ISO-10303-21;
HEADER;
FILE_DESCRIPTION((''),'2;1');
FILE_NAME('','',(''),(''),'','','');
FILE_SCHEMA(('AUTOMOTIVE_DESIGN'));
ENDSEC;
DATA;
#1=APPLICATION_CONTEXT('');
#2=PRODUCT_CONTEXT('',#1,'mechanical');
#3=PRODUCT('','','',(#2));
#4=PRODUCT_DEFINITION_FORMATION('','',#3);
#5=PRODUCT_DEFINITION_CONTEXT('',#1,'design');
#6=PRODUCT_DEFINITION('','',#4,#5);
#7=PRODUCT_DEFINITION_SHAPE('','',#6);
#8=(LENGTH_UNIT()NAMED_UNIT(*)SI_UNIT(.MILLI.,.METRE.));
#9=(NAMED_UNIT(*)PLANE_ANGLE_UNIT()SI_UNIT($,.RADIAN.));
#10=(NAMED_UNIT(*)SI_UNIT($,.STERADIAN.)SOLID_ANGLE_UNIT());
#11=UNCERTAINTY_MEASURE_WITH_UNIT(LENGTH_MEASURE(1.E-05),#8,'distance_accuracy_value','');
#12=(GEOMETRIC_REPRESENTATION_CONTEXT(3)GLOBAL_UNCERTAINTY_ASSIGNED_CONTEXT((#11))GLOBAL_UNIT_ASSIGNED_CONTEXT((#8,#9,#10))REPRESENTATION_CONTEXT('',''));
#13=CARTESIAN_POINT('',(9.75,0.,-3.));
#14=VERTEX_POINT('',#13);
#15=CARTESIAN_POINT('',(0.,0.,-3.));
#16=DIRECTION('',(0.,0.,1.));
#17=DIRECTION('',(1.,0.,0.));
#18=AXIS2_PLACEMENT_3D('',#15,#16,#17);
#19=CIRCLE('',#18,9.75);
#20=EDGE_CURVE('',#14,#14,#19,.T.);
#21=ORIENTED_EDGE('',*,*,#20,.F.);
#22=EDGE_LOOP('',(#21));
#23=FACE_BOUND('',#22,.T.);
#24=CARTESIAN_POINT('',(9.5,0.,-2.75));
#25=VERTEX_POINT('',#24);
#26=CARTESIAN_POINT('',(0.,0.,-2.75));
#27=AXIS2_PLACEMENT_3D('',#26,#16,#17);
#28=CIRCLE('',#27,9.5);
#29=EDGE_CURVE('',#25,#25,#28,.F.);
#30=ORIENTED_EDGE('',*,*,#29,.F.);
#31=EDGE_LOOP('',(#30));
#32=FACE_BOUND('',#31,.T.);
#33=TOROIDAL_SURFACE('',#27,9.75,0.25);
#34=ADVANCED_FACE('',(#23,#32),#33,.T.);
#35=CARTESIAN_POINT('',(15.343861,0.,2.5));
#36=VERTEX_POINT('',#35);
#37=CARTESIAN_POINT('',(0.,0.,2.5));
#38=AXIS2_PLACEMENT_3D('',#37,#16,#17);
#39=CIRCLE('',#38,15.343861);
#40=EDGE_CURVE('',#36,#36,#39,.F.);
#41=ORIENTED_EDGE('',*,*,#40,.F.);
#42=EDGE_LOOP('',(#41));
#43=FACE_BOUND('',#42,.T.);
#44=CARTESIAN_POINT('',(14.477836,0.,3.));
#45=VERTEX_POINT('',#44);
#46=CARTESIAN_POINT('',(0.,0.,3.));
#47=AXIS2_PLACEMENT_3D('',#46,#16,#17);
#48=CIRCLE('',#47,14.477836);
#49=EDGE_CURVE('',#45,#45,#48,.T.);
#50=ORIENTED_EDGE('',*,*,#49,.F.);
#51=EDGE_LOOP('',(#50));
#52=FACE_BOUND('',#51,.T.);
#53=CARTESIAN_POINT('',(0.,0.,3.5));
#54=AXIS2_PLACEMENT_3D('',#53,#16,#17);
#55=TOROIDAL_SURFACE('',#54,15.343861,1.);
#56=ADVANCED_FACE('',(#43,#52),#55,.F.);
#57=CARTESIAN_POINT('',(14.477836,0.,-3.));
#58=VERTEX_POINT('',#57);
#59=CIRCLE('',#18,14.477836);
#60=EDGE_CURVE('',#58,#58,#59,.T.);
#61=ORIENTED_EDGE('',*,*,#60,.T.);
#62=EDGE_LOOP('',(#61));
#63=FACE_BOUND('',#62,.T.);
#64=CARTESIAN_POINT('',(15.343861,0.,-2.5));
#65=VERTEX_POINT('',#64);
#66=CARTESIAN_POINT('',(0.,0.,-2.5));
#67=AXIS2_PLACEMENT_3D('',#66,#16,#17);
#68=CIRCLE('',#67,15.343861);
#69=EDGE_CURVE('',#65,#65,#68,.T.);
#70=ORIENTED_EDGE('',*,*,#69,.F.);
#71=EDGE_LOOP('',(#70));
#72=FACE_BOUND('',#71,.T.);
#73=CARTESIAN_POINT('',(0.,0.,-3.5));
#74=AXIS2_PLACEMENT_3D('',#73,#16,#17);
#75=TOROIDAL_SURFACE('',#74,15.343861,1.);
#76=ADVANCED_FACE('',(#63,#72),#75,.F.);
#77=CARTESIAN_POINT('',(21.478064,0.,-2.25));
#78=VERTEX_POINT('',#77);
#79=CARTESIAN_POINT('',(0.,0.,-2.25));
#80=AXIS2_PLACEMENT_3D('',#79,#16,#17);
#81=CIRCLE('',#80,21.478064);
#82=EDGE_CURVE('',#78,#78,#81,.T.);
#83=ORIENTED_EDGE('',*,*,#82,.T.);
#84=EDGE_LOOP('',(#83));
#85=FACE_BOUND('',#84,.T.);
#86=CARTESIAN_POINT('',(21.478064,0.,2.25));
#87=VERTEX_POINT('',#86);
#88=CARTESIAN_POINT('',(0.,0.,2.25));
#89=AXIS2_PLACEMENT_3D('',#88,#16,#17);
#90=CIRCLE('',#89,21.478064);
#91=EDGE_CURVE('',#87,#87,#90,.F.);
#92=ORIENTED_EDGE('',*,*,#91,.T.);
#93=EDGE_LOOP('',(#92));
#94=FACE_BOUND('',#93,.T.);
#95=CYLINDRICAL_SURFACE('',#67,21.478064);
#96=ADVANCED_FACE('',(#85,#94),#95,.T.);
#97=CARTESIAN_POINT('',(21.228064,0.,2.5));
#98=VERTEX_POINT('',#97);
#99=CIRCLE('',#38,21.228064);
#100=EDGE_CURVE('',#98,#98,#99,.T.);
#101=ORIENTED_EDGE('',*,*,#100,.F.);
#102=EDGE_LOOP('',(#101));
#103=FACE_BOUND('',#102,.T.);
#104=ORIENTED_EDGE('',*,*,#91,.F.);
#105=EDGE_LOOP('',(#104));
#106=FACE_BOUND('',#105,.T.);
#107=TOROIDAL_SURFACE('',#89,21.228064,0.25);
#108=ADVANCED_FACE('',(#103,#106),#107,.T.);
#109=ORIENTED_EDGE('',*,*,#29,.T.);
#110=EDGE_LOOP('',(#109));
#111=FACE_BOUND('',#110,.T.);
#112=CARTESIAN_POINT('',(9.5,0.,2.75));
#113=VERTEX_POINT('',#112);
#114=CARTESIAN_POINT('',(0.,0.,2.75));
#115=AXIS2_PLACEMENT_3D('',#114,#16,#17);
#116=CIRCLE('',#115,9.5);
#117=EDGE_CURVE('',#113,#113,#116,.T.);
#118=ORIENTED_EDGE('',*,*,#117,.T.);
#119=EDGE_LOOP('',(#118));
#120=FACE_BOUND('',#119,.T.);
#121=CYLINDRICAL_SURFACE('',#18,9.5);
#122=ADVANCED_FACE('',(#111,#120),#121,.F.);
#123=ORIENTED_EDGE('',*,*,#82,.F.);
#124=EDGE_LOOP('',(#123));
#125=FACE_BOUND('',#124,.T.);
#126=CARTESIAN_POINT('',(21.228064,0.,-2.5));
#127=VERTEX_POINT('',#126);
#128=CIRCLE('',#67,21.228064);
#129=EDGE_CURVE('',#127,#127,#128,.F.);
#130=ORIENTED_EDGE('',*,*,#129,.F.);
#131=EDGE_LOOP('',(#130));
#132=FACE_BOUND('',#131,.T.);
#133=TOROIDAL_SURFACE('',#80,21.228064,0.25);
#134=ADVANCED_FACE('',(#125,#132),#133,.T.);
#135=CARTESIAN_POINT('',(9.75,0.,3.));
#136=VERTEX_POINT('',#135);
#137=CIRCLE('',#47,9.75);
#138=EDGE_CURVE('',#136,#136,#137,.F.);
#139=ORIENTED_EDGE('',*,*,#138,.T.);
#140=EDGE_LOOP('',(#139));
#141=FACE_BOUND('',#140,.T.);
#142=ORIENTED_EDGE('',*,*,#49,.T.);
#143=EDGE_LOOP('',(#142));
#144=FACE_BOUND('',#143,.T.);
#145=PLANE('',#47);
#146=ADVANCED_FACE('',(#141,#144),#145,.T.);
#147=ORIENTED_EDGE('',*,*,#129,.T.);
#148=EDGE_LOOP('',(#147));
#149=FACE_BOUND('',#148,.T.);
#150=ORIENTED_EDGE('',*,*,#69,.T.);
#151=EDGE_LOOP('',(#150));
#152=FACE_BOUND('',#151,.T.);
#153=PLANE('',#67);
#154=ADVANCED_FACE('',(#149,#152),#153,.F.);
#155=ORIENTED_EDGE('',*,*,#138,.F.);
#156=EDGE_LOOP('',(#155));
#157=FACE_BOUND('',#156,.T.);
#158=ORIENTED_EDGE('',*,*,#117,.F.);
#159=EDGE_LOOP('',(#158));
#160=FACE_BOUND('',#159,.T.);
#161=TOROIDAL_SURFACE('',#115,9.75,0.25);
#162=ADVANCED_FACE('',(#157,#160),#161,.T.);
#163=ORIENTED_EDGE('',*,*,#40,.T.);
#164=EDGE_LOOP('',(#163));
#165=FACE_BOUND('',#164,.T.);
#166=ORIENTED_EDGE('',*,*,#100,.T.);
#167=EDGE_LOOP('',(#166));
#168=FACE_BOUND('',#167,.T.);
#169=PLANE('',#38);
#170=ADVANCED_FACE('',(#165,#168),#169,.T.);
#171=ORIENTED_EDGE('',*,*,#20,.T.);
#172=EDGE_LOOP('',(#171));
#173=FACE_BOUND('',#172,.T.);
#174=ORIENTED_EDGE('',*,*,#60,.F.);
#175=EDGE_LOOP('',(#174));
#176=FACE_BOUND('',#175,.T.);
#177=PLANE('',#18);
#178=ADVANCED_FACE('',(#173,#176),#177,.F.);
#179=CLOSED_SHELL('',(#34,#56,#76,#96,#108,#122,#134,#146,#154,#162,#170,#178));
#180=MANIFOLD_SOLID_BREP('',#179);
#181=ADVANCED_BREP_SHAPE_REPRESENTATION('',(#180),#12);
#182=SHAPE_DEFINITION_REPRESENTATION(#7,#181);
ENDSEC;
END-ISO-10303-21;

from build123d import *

# Parameters (mm, degrees)
BOSS_EXTRU_1_DEPTH      = 3
BOSS_EXTRU_1_DEPTH_BACK = 3
ESQUISSE1_R             = 14.477835748
ESQUISSE1_R_2           = 9.5
BOSS_EXTRU_2_DEPTH      = 2.5
BOSS_EXTRU_2_DEPTH_BACK = 2.5
ESQUISSE3_R             = 21.478063627
ESQUISSE3_R_2           = 14.477835748
CONG_1_R                = 0.25
CONG_2_R                = 1
CONG_3_R                = 0.25


with BuildPart() as part:
    # Esquisse1 → Boss.-Extru.1 (new, two sides: drawn at the far end of the back side and taken through both)
    with BuildSketch(Plane.XY.offset(-BOSS_EXTRU_1_DEPTH_BACK)):
        Circle(ESQUISSE1_R)
        Circle(ESQUISSE1_R_2, mode=Mode.SUBTRACT)
    extrude(amount=BOSS_EXTRU_1_DEPTH + BOSS_EXTRU_1_DEPTH_BACK)

    # Esquisse3 → Boss.-Extru.2 (add, two sides: drawn at the far end of the back side and taken through both)
    with BuildSketch(Plane.XY.offset(-BOSS_EXTRU_2_DEPTH_BACK)):
        Circle(ESQUISSE3_R)
        Circle(ESQUISSE3_R_2, mode=Mode.SUBTRACT)
    extrude(amount=BOSS_EXTRU_2_DEPTH + BOSS_EXTRU_2_DEPTH_BACK)

    # Congé1
    cong_1_edges = [part.edges().sort_by_distance(p)[0] for p in [
        (-21.478063627, 0, -2.5),
        (-21.478063627, 0, 2.5),
    ]]
    fillet(cong_1_edges, radius=CONG_1_R)

    # Congé2
    # the kernel refuses this fillet: 1 mm, written as the material it adds along each edge
    with BuildSketch(Plane(origin=(0, 0, 2.5), x_dir=(1, 0, 0), z_dir=(0, -1, 0))) as cong_2_piece_1:
        with BuildLine():
            CenterArc((15.343861152, 1), CONG_2_R, 210, 60)
            Line((14.477835748, 0.5), (14.46051524, 0.49))
            ThreePointArc((14.46051524, 0.49), (14.457835748, 0.25), (14.457835748, 0))
            Line((14.457835748, 0), (14.477835748, -0.02))
            Line((14.477835748, -0.02), (15.343861152, -0.02))
            Line((15.343861152, -0.02), (15.343861152, 0))
        make_face()
    revolve(axis=Axis((0, 0, 2.5), (0, 0, 1)))
    with BuildSketch(Plane(origin=(0, 0, -2.5), x_dir=(1, 0, 0), z_dir=(0, -1, 0))) as cong_2_piece_2:
        with BuildLine():
            CenterArc((15.343861152, -1), CONG_2_R, 90, 60)
            Line((14.477835748, -0.5), (14.46051524, -0.49))
            ThreePointArc((14.46051524, -0.49), (14.457835748, -0.25), (14.457835748, 0))
            Line((14.457835748, 0), (14.477835748, 0.02))
            Line((14.477835748, 0.02), (15.343861152, 0.02))
            Line((15.343861152, 0.02), (15.343861152, 0))
        make_face()
    revolve(axis=Axis((0, 0, -2.5), (0, 0, 1)))

    # Congé3
    cong_3_edges = [part.edges().sort_by_distance(p)[0] for p in [
        (-9.5, 0, -3),
        (-9.5, 0, 3),
    ]]
    fillet(cong_3_edges, radius=CONG_3_R)


solid = part.part
